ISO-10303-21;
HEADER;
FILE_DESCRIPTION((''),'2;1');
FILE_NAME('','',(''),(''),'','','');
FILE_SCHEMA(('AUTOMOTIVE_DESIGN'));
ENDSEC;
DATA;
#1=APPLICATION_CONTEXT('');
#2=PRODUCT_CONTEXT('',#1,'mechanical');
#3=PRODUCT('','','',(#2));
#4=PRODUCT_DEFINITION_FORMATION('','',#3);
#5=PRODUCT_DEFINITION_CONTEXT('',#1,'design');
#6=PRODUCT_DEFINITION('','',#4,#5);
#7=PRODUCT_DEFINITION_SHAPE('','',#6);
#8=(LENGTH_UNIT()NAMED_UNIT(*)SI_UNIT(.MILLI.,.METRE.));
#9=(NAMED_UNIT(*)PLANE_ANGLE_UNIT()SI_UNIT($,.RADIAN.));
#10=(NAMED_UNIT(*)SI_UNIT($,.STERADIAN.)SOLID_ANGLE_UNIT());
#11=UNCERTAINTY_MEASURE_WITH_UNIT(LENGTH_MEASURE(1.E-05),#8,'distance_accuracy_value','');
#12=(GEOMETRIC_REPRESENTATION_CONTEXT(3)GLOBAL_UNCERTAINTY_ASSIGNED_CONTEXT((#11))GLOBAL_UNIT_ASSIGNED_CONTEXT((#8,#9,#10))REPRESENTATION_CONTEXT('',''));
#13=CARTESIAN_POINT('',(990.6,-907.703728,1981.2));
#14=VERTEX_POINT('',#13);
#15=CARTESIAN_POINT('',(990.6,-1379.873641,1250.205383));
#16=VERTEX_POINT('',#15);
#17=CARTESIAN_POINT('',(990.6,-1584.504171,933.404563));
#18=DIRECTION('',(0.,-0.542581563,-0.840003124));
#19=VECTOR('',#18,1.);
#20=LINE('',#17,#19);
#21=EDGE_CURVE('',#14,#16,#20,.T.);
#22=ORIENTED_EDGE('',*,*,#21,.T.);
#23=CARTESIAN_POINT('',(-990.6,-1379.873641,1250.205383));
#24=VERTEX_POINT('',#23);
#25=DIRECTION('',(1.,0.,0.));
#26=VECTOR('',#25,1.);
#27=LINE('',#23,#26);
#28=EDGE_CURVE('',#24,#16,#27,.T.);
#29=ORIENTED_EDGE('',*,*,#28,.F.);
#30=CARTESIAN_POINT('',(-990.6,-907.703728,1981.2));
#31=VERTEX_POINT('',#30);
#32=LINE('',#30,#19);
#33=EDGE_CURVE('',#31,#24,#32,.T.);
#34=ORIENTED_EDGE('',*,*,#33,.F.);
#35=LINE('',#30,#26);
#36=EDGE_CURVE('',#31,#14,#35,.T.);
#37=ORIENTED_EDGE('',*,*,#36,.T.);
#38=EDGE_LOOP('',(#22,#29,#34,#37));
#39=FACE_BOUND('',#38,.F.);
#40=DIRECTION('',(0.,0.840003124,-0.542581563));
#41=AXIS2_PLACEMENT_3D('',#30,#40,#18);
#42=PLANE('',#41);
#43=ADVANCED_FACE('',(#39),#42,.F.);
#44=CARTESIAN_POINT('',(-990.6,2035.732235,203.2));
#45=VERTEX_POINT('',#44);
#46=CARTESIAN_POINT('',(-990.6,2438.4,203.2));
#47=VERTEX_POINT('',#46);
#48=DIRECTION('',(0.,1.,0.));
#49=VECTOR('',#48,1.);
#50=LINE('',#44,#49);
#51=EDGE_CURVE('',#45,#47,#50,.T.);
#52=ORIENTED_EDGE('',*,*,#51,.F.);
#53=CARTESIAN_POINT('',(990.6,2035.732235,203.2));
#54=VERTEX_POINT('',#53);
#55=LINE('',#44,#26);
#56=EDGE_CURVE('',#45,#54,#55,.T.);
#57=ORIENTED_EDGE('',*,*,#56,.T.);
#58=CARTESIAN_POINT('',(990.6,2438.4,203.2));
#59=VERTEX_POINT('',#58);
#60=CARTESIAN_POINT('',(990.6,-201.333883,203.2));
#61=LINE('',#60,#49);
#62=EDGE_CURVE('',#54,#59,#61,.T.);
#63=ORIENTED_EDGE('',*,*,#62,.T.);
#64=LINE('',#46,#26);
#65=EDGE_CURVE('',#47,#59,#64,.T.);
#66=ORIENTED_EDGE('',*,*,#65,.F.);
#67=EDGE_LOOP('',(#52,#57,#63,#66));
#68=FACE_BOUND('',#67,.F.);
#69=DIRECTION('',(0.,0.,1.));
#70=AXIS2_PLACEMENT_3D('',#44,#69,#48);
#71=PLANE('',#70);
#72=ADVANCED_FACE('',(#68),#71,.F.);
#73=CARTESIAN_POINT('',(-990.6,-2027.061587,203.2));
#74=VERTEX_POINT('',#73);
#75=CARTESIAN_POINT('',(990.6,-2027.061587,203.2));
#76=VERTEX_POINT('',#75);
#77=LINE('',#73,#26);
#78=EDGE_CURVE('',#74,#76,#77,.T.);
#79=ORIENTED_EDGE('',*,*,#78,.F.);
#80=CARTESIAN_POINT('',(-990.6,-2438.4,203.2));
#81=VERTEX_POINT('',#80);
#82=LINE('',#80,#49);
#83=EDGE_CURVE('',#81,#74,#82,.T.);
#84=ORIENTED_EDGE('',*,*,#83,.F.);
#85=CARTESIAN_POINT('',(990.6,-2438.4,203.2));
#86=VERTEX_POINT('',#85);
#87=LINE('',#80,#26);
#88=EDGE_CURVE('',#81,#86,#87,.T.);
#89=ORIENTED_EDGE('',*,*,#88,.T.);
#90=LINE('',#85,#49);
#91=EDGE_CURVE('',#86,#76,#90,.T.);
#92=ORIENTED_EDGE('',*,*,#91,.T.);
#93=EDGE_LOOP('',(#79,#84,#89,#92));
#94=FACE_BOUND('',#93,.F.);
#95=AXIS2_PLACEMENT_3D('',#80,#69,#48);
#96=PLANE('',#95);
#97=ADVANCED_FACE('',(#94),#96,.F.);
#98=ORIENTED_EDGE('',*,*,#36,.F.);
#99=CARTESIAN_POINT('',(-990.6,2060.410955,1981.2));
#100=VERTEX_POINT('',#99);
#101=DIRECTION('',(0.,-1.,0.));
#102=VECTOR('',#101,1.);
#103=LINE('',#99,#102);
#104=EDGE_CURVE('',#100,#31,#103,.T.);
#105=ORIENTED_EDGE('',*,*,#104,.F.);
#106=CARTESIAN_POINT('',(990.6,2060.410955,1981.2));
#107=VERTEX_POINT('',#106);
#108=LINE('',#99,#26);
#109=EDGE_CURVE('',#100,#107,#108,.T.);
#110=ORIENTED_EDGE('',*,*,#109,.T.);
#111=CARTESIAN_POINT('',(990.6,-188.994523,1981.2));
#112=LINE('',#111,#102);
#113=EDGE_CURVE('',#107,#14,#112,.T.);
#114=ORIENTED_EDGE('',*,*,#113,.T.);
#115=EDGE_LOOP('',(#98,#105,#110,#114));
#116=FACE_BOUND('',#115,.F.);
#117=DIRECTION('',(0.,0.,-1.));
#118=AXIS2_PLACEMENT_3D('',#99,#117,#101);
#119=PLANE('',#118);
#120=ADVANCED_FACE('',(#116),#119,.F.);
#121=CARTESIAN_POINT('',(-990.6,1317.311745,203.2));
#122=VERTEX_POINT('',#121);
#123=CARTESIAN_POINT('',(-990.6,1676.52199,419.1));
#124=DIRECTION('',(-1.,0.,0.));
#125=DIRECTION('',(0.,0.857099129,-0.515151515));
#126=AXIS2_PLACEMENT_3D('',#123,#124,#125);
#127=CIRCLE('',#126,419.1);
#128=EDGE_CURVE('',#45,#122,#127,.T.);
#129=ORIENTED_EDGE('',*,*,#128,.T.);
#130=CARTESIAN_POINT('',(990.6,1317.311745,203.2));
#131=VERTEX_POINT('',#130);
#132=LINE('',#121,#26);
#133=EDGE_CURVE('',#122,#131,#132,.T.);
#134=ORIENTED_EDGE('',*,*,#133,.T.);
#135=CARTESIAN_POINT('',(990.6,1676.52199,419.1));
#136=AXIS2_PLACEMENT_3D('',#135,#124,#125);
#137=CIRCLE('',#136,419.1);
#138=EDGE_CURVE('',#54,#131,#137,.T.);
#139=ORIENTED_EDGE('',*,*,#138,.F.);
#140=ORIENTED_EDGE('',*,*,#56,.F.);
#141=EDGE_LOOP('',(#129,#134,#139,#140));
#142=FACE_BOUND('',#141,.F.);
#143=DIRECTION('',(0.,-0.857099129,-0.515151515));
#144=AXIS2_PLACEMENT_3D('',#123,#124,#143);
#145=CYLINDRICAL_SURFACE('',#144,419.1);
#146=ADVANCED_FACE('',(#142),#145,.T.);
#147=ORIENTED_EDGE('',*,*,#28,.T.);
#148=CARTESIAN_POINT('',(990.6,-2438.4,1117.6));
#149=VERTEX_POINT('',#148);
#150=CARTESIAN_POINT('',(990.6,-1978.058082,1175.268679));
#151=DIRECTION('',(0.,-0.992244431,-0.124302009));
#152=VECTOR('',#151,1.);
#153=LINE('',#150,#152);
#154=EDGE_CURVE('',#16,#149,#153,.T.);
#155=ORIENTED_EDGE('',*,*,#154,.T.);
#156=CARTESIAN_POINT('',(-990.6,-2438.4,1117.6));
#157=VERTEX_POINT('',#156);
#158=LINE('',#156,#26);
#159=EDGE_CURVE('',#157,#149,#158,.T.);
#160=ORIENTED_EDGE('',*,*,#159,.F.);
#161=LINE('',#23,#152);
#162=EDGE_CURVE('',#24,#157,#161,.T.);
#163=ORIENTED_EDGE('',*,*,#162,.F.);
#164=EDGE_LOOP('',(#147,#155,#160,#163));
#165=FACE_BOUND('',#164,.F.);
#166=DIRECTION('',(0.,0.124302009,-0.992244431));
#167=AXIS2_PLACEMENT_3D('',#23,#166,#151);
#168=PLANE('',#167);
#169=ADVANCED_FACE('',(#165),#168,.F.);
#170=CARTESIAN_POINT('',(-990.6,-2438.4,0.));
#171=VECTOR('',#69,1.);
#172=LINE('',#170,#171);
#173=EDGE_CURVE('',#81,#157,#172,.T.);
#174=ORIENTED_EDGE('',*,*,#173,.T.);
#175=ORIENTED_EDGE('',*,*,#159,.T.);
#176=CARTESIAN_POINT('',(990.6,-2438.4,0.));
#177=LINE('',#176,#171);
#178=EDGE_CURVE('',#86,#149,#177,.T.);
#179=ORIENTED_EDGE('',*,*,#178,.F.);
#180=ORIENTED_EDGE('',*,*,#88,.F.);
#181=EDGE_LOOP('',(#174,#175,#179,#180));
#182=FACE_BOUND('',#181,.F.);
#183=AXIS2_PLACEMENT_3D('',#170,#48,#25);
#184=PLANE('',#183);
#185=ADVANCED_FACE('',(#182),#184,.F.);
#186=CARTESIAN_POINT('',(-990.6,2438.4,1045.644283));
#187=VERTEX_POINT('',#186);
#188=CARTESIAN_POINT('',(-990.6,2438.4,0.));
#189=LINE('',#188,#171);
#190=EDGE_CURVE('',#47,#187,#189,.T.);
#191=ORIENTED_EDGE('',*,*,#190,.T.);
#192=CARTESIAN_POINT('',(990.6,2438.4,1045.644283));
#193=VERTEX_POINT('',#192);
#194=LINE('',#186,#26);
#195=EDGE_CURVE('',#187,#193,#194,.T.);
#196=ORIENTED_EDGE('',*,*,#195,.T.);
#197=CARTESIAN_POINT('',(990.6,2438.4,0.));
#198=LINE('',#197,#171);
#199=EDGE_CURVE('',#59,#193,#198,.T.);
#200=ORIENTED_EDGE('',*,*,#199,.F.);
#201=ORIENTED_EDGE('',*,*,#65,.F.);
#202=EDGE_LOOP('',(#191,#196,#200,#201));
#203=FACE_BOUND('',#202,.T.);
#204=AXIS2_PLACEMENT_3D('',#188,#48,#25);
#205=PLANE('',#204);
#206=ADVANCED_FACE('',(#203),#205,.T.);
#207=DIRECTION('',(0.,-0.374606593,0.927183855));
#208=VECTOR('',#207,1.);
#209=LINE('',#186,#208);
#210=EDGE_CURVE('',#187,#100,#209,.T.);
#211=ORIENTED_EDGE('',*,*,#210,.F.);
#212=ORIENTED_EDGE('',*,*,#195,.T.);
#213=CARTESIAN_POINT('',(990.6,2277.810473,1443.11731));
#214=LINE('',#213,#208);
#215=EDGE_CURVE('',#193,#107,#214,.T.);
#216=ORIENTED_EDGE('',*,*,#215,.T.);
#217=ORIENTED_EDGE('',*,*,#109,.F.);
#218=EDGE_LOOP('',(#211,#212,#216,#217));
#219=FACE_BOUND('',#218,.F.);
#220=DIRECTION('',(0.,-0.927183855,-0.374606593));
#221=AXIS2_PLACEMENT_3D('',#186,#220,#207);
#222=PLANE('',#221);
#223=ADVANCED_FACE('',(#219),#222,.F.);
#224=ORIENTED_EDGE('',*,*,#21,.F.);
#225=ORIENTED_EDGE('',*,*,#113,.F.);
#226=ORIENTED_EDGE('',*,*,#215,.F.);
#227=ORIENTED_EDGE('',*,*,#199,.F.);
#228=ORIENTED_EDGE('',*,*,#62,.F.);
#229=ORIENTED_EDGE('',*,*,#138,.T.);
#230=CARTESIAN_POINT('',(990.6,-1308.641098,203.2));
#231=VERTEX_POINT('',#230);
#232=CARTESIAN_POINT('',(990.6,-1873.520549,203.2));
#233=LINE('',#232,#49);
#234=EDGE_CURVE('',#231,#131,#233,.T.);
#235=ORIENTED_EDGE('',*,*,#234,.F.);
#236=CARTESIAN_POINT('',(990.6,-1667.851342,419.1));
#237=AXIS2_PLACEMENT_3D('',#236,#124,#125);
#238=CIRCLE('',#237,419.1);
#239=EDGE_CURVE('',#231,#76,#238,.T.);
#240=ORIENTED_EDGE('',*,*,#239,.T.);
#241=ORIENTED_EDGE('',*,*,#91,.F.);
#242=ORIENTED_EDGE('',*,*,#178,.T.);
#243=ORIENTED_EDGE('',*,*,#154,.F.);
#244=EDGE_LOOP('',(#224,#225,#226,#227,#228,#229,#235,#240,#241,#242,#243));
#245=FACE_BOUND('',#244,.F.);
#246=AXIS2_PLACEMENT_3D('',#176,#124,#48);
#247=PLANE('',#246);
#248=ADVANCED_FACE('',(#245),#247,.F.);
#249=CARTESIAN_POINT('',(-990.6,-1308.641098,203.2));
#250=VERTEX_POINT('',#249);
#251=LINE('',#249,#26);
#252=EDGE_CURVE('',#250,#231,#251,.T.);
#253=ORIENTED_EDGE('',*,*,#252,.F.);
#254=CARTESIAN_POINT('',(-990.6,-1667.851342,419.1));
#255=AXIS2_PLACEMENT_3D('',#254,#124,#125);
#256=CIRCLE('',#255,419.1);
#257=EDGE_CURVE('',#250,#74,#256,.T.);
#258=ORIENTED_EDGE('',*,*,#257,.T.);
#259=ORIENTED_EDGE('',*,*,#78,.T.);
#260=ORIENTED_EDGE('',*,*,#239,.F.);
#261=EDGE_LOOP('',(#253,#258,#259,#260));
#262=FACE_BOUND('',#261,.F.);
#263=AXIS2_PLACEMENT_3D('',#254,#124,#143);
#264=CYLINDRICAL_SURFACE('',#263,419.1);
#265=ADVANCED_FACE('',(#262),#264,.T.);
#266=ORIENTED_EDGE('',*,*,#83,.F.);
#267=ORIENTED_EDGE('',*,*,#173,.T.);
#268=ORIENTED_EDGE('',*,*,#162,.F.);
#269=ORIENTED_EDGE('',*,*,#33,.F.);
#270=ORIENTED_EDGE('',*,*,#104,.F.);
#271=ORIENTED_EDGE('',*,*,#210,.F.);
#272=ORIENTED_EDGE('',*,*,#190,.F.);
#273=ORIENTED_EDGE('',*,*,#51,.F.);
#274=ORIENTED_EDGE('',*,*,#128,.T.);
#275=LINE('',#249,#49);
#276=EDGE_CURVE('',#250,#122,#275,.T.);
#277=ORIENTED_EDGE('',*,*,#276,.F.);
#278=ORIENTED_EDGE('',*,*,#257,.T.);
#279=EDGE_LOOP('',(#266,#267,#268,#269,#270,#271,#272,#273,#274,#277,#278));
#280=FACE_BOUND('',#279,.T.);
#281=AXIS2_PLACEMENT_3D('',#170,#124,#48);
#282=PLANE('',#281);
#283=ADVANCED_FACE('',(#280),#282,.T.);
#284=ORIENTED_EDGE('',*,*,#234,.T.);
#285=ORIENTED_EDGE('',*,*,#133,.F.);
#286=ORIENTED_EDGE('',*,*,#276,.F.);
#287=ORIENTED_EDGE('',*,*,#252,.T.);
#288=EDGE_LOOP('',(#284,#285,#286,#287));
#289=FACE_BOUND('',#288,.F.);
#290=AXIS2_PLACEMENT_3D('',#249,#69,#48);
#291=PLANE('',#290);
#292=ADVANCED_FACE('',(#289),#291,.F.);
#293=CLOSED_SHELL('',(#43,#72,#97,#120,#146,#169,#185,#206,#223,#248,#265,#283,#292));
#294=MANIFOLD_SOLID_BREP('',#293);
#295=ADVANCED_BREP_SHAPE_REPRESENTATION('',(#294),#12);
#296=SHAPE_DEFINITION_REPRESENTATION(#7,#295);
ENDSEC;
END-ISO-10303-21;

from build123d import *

# Parameters (mm, degrees)
F0_W     = 1981.2
F0_H     = 4876.8
F1_DEPTH = 3048
F3_DEPTH = 6096


with BuildPart() as f1:
    # F0 (on Top) → F1 (new body)
    with BuildSketch(Plane.XY):
        Rectangle(F0_W, F0_H)
    extrude(amount=F1_DEPTH)

    # F2 (on face) → F3 (cut)
    with BuildSketch(Plane(origin=(-990.6, 0, 0), x_dir=(0, -1, 0), z_dir=(-1, 0, 0))):
        Polygon((1379.873641154, 1250.2053831043), (2438.4, 1117.6), (2438.4, 3048), (-2438.4, 3048), (-2438.4, 1045.6442832947), (-2060.410954721, 1981.2), (907.7037284231, 1981.2), align=None)
        with BuildLine():
            Line((2438.4, 0), (2438.4, 203.2))
            Line((2438.4, 203.2), (2027.0615872515, 203.2))
            ThreePointArc((2027.0615872515, 203.2), (1874.2019202661, 54.320273291), (1667.8513478767, 0))
            Line((1667.8513478767, 0), (2438.4, 0))
        make_face()
        with BuildLine():
            ThreePointArc((1667.8513478767, 0), (1461.5007693106, 54.3202705987), (1308.641097566, 203.2))
            Line((1308.641097566, 203.2), (-1317.311745224, 203.2))
            ThreePointArc((-1317.311745224, 203.2), (-1470.171414589, 54.3202719448), (-1676.5219900668, 0))
            Line((-1676.5219900668, 0), (1667.8513478767, 0))
        make_face()
        with BuildLine():
            Line((-2438.4, 0), (-1676.5219900668, 0))
            ThreePointArc((-1676.5219900668, 0), (-1882.8725655446, 54.3202719448), (-2035.7322349096, 203.2))
            Line((-2035.7322349096, 203.2), (-2438.4, 203.2))
            Line((-2438.4, 203.2), (-2438.4, 0))
        make_face()
    extrude(amount=-F3_DEPTH, mode=Mode.SUBTRACT)


solid = f1.part
